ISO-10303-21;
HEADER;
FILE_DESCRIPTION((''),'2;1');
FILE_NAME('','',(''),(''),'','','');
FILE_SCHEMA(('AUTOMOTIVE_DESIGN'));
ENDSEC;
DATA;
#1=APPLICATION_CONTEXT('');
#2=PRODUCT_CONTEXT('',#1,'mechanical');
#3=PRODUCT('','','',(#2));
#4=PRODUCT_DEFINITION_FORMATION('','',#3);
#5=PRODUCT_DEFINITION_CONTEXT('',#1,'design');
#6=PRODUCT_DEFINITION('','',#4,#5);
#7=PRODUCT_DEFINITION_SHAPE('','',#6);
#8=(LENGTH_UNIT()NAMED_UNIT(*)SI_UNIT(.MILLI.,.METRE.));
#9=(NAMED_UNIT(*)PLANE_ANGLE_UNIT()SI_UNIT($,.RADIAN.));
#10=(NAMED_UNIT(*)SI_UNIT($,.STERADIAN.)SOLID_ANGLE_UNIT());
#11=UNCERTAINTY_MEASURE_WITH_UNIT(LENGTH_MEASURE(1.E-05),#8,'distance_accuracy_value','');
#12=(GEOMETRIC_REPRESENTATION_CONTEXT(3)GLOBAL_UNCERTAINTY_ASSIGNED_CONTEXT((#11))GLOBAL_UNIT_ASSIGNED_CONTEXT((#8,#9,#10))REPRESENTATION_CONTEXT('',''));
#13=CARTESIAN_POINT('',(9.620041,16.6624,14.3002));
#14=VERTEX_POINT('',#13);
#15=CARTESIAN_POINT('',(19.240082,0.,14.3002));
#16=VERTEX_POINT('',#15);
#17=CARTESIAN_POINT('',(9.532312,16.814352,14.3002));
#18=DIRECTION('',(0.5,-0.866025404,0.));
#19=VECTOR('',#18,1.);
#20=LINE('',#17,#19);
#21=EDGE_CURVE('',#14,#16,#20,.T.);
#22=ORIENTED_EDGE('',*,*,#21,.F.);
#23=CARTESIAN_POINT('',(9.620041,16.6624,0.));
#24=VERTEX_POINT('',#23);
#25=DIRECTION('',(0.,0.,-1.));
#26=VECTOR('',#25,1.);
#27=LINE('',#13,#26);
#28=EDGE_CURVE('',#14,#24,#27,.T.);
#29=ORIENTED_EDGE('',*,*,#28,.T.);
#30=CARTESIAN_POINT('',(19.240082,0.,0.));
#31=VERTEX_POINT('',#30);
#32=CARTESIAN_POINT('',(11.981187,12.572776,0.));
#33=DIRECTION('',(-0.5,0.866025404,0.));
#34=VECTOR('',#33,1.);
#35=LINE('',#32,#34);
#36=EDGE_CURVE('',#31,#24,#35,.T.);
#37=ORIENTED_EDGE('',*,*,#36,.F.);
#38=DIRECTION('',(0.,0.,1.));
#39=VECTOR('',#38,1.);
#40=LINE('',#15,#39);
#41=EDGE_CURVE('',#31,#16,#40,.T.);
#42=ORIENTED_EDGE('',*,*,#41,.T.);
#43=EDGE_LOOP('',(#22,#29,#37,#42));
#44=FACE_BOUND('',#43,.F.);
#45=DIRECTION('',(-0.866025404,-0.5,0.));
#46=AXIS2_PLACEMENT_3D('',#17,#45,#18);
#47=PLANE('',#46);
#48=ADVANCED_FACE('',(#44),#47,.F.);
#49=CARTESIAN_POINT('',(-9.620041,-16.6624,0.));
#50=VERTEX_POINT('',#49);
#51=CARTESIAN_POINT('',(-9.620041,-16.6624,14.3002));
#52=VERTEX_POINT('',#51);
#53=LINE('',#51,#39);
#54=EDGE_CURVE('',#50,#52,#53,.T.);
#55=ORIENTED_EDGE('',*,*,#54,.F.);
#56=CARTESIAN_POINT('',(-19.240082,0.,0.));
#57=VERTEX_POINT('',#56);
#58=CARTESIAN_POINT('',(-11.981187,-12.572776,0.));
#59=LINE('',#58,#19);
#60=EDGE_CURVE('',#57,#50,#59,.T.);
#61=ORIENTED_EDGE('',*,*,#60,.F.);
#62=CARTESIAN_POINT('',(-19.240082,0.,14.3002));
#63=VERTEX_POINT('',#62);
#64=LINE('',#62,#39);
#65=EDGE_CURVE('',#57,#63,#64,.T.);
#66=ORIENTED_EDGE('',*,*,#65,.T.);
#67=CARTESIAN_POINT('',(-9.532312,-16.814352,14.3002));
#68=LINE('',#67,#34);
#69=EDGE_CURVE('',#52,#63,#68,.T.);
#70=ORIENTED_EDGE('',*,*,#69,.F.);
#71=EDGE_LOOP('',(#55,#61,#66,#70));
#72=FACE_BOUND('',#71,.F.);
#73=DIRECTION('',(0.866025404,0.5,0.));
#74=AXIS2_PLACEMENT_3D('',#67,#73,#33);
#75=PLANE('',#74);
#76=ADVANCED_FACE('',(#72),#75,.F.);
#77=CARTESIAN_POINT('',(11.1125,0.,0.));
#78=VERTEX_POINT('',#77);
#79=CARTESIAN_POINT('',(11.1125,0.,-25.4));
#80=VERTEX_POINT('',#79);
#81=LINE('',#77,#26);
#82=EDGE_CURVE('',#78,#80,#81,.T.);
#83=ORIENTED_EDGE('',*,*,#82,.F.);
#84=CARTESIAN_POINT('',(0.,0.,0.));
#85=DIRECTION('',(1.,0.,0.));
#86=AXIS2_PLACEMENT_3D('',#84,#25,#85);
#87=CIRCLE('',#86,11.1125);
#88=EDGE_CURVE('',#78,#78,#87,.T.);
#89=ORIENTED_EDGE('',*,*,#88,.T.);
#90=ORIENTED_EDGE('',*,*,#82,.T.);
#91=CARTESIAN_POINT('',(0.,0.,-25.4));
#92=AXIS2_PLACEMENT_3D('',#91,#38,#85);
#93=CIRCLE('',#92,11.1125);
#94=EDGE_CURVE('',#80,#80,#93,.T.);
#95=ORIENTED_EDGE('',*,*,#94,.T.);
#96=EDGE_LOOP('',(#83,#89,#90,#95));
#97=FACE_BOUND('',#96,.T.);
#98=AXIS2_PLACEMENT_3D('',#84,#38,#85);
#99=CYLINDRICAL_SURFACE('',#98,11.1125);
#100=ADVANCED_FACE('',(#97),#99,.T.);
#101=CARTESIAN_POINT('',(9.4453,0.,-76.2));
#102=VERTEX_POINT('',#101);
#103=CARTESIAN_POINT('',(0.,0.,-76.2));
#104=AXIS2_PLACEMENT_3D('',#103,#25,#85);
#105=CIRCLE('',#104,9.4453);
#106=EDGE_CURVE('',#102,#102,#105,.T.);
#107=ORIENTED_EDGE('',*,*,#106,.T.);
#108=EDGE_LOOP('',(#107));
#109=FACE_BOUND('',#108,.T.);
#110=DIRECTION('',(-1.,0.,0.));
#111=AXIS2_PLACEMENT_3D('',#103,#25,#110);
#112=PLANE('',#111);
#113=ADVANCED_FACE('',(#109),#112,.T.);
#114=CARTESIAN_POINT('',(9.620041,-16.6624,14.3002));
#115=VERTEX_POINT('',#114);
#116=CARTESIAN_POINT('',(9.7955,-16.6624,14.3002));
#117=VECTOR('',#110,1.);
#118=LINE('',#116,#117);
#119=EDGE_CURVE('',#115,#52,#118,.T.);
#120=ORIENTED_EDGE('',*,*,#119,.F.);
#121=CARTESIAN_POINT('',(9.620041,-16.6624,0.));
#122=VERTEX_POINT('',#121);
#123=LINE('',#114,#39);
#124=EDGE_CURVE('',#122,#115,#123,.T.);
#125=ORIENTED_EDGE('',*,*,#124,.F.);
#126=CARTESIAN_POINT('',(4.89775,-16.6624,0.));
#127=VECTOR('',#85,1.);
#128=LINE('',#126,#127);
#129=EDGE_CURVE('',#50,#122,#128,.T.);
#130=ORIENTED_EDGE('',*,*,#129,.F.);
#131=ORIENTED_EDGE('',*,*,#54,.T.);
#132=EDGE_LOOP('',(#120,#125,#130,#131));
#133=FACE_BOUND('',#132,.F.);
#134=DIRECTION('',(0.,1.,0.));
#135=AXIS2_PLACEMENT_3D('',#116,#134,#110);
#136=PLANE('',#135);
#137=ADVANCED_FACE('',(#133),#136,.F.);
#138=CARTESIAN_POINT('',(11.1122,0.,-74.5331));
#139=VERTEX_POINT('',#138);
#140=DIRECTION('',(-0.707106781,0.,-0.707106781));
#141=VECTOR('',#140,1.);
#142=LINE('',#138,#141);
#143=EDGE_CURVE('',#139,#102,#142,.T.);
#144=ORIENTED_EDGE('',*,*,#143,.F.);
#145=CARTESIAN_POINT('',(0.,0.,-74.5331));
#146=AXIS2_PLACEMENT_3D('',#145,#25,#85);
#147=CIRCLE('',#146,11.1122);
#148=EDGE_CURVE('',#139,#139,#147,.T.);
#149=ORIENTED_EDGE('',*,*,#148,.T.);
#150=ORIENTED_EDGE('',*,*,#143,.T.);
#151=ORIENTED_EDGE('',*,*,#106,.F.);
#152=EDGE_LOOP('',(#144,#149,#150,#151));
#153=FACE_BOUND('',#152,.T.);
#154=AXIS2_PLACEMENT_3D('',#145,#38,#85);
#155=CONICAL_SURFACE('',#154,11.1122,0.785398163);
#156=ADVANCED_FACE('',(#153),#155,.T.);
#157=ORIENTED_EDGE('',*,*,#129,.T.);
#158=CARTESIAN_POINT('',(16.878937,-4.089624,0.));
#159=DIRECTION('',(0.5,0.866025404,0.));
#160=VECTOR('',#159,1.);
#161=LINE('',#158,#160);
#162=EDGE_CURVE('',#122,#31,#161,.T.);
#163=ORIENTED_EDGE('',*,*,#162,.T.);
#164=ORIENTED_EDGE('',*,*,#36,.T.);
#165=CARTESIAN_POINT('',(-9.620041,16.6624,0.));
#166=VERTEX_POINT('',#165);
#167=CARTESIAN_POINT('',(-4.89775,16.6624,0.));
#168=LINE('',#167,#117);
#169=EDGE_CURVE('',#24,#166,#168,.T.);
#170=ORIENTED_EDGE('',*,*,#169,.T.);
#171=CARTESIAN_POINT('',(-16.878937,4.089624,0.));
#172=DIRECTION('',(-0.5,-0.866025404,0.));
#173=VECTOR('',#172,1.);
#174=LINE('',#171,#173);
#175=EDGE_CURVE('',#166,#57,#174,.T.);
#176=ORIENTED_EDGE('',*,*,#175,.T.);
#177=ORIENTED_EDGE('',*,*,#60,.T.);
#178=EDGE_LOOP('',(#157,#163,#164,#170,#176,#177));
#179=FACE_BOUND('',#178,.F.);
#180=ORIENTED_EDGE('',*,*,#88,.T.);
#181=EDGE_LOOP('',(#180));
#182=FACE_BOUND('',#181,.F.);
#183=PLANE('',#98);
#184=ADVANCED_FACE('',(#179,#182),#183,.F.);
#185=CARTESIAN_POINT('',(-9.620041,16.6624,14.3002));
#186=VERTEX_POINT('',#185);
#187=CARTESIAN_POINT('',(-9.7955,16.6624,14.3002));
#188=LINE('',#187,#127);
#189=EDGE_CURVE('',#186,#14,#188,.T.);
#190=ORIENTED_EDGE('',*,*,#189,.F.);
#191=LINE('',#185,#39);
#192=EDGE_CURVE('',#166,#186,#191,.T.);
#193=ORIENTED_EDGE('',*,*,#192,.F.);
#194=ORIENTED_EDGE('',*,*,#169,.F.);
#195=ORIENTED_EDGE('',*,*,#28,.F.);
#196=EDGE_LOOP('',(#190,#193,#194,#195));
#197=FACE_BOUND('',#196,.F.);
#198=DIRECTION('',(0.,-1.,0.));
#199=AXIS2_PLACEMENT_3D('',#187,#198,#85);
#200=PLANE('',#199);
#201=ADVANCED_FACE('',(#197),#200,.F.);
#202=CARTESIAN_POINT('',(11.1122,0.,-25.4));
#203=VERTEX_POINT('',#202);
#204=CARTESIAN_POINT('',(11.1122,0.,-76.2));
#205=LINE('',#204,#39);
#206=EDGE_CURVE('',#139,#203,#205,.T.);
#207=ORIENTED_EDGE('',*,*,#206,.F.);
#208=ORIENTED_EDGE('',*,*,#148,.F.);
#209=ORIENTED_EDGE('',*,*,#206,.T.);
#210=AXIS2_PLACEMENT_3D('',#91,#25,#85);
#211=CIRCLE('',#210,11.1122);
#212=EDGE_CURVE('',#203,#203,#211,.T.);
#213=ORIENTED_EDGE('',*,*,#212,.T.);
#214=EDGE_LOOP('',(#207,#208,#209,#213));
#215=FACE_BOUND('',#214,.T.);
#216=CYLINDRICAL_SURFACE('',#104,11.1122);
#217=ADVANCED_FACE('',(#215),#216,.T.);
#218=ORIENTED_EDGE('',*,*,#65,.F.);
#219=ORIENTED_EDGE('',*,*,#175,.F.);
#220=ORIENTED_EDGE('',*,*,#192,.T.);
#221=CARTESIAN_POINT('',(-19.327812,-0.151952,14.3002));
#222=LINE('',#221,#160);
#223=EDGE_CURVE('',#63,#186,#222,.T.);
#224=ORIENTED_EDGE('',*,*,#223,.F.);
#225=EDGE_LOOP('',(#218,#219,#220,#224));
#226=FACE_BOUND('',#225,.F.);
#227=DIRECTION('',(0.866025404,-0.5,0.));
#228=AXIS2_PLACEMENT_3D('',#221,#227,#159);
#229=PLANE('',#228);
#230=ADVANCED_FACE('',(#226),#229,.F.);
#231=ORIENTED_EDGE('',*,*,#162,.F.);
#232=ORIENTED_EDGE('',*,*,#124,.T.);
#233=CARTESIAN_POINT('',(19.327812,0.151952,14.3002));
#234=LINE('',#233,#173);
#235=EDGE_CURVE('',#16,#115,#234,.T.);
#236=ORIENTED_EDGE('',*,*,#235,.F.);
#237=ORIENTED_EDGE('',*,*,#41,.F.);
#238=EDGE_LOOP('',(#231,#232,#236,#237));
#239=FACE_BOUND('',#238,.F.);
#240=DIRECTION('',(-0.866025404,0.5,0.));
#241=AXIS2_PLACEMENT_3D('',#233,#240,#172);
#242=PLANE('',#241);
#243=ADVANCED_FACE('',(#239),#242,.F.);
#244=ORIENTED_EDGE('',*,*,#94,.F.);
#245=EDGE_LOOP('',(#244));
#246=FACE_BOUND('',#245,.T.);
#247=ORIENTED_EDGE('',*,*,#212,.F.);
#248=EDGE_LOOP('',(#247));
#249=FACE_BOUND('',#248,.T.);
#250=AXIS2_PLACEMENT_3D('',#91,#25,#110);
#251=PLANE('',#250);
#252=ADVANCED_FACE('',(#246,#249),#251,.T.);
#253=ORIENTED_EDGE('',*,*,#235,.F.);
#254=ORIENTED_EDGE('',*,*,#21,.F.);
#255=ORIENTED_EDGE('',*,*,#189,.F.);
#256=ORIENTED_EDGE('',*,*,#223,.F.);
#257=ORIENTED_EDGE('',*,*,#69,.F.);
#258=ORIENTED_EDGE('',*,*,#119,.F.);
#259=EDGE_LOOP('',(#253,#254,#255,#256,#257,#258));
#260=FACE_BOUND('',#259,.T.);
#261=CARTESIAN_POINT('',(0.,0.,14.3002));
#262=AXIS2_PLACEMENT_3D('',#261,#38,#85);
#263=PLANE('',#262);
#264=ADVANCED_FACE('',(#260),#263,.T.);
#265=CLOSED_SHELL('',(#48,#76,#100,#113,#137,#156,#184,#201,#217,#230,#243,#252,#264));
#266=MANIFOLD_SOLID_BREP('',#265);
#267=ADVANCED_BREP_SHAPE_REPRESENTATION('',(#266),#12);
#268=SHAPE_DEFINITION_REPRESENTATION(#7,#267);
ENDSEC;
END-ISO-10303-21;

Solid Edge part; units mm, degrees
sketch "Sketch1" plane through (0, 0, 0) normal (0, 0, 1) x (1, 0, 0)
  circle A0 centre (0, 0) radius 19.3284
  dimension "D1" = 38.6568
extrude "Protrusion1" add sketch "Sketch1" along normal blind 14.3002
sketch "Sketch2" plane through (0, 0, 0) normal (0, 0, -1) x (1, 0, 0)
  circle A0 centre (0, 0) radius 11.1125
extrude "Protrusion2" add sketch "Sketch2" along normal blind 76.2
sketch "Sketch3" plane through (0, 0, -76.2) normal (0, 0, -1) x (1, 0, 0)
  circle A0 centre (0, 0) radius 11.1122
extrude "Cutout1" cut sketch "Sketch3" against normal blind 50.8 flip side to cut
chamfer "Chamfer_1" distance 1.6669 angle 45 1 edges at (-11.1122, 0, -76.2)
sketch "Sketch4" plane through (0, 0, 14.3002) normal (0, 0, 1) x (1, 0, 0)
  line L0 (-9.7955, 16.6624) -> (9.7955, 16.6624)
  dimension "D1" = 33.3248
extrude "Cutout2" cut sketch "Sketch4" against normal up to next material side at (0, 16.7124, 14.3002)
pattern_circular "Pattern1" count 6 over 360 about axis through (0, 0, 14.3002) along (0, 0, 1) of "Cutout2"
properties part number "106012"
